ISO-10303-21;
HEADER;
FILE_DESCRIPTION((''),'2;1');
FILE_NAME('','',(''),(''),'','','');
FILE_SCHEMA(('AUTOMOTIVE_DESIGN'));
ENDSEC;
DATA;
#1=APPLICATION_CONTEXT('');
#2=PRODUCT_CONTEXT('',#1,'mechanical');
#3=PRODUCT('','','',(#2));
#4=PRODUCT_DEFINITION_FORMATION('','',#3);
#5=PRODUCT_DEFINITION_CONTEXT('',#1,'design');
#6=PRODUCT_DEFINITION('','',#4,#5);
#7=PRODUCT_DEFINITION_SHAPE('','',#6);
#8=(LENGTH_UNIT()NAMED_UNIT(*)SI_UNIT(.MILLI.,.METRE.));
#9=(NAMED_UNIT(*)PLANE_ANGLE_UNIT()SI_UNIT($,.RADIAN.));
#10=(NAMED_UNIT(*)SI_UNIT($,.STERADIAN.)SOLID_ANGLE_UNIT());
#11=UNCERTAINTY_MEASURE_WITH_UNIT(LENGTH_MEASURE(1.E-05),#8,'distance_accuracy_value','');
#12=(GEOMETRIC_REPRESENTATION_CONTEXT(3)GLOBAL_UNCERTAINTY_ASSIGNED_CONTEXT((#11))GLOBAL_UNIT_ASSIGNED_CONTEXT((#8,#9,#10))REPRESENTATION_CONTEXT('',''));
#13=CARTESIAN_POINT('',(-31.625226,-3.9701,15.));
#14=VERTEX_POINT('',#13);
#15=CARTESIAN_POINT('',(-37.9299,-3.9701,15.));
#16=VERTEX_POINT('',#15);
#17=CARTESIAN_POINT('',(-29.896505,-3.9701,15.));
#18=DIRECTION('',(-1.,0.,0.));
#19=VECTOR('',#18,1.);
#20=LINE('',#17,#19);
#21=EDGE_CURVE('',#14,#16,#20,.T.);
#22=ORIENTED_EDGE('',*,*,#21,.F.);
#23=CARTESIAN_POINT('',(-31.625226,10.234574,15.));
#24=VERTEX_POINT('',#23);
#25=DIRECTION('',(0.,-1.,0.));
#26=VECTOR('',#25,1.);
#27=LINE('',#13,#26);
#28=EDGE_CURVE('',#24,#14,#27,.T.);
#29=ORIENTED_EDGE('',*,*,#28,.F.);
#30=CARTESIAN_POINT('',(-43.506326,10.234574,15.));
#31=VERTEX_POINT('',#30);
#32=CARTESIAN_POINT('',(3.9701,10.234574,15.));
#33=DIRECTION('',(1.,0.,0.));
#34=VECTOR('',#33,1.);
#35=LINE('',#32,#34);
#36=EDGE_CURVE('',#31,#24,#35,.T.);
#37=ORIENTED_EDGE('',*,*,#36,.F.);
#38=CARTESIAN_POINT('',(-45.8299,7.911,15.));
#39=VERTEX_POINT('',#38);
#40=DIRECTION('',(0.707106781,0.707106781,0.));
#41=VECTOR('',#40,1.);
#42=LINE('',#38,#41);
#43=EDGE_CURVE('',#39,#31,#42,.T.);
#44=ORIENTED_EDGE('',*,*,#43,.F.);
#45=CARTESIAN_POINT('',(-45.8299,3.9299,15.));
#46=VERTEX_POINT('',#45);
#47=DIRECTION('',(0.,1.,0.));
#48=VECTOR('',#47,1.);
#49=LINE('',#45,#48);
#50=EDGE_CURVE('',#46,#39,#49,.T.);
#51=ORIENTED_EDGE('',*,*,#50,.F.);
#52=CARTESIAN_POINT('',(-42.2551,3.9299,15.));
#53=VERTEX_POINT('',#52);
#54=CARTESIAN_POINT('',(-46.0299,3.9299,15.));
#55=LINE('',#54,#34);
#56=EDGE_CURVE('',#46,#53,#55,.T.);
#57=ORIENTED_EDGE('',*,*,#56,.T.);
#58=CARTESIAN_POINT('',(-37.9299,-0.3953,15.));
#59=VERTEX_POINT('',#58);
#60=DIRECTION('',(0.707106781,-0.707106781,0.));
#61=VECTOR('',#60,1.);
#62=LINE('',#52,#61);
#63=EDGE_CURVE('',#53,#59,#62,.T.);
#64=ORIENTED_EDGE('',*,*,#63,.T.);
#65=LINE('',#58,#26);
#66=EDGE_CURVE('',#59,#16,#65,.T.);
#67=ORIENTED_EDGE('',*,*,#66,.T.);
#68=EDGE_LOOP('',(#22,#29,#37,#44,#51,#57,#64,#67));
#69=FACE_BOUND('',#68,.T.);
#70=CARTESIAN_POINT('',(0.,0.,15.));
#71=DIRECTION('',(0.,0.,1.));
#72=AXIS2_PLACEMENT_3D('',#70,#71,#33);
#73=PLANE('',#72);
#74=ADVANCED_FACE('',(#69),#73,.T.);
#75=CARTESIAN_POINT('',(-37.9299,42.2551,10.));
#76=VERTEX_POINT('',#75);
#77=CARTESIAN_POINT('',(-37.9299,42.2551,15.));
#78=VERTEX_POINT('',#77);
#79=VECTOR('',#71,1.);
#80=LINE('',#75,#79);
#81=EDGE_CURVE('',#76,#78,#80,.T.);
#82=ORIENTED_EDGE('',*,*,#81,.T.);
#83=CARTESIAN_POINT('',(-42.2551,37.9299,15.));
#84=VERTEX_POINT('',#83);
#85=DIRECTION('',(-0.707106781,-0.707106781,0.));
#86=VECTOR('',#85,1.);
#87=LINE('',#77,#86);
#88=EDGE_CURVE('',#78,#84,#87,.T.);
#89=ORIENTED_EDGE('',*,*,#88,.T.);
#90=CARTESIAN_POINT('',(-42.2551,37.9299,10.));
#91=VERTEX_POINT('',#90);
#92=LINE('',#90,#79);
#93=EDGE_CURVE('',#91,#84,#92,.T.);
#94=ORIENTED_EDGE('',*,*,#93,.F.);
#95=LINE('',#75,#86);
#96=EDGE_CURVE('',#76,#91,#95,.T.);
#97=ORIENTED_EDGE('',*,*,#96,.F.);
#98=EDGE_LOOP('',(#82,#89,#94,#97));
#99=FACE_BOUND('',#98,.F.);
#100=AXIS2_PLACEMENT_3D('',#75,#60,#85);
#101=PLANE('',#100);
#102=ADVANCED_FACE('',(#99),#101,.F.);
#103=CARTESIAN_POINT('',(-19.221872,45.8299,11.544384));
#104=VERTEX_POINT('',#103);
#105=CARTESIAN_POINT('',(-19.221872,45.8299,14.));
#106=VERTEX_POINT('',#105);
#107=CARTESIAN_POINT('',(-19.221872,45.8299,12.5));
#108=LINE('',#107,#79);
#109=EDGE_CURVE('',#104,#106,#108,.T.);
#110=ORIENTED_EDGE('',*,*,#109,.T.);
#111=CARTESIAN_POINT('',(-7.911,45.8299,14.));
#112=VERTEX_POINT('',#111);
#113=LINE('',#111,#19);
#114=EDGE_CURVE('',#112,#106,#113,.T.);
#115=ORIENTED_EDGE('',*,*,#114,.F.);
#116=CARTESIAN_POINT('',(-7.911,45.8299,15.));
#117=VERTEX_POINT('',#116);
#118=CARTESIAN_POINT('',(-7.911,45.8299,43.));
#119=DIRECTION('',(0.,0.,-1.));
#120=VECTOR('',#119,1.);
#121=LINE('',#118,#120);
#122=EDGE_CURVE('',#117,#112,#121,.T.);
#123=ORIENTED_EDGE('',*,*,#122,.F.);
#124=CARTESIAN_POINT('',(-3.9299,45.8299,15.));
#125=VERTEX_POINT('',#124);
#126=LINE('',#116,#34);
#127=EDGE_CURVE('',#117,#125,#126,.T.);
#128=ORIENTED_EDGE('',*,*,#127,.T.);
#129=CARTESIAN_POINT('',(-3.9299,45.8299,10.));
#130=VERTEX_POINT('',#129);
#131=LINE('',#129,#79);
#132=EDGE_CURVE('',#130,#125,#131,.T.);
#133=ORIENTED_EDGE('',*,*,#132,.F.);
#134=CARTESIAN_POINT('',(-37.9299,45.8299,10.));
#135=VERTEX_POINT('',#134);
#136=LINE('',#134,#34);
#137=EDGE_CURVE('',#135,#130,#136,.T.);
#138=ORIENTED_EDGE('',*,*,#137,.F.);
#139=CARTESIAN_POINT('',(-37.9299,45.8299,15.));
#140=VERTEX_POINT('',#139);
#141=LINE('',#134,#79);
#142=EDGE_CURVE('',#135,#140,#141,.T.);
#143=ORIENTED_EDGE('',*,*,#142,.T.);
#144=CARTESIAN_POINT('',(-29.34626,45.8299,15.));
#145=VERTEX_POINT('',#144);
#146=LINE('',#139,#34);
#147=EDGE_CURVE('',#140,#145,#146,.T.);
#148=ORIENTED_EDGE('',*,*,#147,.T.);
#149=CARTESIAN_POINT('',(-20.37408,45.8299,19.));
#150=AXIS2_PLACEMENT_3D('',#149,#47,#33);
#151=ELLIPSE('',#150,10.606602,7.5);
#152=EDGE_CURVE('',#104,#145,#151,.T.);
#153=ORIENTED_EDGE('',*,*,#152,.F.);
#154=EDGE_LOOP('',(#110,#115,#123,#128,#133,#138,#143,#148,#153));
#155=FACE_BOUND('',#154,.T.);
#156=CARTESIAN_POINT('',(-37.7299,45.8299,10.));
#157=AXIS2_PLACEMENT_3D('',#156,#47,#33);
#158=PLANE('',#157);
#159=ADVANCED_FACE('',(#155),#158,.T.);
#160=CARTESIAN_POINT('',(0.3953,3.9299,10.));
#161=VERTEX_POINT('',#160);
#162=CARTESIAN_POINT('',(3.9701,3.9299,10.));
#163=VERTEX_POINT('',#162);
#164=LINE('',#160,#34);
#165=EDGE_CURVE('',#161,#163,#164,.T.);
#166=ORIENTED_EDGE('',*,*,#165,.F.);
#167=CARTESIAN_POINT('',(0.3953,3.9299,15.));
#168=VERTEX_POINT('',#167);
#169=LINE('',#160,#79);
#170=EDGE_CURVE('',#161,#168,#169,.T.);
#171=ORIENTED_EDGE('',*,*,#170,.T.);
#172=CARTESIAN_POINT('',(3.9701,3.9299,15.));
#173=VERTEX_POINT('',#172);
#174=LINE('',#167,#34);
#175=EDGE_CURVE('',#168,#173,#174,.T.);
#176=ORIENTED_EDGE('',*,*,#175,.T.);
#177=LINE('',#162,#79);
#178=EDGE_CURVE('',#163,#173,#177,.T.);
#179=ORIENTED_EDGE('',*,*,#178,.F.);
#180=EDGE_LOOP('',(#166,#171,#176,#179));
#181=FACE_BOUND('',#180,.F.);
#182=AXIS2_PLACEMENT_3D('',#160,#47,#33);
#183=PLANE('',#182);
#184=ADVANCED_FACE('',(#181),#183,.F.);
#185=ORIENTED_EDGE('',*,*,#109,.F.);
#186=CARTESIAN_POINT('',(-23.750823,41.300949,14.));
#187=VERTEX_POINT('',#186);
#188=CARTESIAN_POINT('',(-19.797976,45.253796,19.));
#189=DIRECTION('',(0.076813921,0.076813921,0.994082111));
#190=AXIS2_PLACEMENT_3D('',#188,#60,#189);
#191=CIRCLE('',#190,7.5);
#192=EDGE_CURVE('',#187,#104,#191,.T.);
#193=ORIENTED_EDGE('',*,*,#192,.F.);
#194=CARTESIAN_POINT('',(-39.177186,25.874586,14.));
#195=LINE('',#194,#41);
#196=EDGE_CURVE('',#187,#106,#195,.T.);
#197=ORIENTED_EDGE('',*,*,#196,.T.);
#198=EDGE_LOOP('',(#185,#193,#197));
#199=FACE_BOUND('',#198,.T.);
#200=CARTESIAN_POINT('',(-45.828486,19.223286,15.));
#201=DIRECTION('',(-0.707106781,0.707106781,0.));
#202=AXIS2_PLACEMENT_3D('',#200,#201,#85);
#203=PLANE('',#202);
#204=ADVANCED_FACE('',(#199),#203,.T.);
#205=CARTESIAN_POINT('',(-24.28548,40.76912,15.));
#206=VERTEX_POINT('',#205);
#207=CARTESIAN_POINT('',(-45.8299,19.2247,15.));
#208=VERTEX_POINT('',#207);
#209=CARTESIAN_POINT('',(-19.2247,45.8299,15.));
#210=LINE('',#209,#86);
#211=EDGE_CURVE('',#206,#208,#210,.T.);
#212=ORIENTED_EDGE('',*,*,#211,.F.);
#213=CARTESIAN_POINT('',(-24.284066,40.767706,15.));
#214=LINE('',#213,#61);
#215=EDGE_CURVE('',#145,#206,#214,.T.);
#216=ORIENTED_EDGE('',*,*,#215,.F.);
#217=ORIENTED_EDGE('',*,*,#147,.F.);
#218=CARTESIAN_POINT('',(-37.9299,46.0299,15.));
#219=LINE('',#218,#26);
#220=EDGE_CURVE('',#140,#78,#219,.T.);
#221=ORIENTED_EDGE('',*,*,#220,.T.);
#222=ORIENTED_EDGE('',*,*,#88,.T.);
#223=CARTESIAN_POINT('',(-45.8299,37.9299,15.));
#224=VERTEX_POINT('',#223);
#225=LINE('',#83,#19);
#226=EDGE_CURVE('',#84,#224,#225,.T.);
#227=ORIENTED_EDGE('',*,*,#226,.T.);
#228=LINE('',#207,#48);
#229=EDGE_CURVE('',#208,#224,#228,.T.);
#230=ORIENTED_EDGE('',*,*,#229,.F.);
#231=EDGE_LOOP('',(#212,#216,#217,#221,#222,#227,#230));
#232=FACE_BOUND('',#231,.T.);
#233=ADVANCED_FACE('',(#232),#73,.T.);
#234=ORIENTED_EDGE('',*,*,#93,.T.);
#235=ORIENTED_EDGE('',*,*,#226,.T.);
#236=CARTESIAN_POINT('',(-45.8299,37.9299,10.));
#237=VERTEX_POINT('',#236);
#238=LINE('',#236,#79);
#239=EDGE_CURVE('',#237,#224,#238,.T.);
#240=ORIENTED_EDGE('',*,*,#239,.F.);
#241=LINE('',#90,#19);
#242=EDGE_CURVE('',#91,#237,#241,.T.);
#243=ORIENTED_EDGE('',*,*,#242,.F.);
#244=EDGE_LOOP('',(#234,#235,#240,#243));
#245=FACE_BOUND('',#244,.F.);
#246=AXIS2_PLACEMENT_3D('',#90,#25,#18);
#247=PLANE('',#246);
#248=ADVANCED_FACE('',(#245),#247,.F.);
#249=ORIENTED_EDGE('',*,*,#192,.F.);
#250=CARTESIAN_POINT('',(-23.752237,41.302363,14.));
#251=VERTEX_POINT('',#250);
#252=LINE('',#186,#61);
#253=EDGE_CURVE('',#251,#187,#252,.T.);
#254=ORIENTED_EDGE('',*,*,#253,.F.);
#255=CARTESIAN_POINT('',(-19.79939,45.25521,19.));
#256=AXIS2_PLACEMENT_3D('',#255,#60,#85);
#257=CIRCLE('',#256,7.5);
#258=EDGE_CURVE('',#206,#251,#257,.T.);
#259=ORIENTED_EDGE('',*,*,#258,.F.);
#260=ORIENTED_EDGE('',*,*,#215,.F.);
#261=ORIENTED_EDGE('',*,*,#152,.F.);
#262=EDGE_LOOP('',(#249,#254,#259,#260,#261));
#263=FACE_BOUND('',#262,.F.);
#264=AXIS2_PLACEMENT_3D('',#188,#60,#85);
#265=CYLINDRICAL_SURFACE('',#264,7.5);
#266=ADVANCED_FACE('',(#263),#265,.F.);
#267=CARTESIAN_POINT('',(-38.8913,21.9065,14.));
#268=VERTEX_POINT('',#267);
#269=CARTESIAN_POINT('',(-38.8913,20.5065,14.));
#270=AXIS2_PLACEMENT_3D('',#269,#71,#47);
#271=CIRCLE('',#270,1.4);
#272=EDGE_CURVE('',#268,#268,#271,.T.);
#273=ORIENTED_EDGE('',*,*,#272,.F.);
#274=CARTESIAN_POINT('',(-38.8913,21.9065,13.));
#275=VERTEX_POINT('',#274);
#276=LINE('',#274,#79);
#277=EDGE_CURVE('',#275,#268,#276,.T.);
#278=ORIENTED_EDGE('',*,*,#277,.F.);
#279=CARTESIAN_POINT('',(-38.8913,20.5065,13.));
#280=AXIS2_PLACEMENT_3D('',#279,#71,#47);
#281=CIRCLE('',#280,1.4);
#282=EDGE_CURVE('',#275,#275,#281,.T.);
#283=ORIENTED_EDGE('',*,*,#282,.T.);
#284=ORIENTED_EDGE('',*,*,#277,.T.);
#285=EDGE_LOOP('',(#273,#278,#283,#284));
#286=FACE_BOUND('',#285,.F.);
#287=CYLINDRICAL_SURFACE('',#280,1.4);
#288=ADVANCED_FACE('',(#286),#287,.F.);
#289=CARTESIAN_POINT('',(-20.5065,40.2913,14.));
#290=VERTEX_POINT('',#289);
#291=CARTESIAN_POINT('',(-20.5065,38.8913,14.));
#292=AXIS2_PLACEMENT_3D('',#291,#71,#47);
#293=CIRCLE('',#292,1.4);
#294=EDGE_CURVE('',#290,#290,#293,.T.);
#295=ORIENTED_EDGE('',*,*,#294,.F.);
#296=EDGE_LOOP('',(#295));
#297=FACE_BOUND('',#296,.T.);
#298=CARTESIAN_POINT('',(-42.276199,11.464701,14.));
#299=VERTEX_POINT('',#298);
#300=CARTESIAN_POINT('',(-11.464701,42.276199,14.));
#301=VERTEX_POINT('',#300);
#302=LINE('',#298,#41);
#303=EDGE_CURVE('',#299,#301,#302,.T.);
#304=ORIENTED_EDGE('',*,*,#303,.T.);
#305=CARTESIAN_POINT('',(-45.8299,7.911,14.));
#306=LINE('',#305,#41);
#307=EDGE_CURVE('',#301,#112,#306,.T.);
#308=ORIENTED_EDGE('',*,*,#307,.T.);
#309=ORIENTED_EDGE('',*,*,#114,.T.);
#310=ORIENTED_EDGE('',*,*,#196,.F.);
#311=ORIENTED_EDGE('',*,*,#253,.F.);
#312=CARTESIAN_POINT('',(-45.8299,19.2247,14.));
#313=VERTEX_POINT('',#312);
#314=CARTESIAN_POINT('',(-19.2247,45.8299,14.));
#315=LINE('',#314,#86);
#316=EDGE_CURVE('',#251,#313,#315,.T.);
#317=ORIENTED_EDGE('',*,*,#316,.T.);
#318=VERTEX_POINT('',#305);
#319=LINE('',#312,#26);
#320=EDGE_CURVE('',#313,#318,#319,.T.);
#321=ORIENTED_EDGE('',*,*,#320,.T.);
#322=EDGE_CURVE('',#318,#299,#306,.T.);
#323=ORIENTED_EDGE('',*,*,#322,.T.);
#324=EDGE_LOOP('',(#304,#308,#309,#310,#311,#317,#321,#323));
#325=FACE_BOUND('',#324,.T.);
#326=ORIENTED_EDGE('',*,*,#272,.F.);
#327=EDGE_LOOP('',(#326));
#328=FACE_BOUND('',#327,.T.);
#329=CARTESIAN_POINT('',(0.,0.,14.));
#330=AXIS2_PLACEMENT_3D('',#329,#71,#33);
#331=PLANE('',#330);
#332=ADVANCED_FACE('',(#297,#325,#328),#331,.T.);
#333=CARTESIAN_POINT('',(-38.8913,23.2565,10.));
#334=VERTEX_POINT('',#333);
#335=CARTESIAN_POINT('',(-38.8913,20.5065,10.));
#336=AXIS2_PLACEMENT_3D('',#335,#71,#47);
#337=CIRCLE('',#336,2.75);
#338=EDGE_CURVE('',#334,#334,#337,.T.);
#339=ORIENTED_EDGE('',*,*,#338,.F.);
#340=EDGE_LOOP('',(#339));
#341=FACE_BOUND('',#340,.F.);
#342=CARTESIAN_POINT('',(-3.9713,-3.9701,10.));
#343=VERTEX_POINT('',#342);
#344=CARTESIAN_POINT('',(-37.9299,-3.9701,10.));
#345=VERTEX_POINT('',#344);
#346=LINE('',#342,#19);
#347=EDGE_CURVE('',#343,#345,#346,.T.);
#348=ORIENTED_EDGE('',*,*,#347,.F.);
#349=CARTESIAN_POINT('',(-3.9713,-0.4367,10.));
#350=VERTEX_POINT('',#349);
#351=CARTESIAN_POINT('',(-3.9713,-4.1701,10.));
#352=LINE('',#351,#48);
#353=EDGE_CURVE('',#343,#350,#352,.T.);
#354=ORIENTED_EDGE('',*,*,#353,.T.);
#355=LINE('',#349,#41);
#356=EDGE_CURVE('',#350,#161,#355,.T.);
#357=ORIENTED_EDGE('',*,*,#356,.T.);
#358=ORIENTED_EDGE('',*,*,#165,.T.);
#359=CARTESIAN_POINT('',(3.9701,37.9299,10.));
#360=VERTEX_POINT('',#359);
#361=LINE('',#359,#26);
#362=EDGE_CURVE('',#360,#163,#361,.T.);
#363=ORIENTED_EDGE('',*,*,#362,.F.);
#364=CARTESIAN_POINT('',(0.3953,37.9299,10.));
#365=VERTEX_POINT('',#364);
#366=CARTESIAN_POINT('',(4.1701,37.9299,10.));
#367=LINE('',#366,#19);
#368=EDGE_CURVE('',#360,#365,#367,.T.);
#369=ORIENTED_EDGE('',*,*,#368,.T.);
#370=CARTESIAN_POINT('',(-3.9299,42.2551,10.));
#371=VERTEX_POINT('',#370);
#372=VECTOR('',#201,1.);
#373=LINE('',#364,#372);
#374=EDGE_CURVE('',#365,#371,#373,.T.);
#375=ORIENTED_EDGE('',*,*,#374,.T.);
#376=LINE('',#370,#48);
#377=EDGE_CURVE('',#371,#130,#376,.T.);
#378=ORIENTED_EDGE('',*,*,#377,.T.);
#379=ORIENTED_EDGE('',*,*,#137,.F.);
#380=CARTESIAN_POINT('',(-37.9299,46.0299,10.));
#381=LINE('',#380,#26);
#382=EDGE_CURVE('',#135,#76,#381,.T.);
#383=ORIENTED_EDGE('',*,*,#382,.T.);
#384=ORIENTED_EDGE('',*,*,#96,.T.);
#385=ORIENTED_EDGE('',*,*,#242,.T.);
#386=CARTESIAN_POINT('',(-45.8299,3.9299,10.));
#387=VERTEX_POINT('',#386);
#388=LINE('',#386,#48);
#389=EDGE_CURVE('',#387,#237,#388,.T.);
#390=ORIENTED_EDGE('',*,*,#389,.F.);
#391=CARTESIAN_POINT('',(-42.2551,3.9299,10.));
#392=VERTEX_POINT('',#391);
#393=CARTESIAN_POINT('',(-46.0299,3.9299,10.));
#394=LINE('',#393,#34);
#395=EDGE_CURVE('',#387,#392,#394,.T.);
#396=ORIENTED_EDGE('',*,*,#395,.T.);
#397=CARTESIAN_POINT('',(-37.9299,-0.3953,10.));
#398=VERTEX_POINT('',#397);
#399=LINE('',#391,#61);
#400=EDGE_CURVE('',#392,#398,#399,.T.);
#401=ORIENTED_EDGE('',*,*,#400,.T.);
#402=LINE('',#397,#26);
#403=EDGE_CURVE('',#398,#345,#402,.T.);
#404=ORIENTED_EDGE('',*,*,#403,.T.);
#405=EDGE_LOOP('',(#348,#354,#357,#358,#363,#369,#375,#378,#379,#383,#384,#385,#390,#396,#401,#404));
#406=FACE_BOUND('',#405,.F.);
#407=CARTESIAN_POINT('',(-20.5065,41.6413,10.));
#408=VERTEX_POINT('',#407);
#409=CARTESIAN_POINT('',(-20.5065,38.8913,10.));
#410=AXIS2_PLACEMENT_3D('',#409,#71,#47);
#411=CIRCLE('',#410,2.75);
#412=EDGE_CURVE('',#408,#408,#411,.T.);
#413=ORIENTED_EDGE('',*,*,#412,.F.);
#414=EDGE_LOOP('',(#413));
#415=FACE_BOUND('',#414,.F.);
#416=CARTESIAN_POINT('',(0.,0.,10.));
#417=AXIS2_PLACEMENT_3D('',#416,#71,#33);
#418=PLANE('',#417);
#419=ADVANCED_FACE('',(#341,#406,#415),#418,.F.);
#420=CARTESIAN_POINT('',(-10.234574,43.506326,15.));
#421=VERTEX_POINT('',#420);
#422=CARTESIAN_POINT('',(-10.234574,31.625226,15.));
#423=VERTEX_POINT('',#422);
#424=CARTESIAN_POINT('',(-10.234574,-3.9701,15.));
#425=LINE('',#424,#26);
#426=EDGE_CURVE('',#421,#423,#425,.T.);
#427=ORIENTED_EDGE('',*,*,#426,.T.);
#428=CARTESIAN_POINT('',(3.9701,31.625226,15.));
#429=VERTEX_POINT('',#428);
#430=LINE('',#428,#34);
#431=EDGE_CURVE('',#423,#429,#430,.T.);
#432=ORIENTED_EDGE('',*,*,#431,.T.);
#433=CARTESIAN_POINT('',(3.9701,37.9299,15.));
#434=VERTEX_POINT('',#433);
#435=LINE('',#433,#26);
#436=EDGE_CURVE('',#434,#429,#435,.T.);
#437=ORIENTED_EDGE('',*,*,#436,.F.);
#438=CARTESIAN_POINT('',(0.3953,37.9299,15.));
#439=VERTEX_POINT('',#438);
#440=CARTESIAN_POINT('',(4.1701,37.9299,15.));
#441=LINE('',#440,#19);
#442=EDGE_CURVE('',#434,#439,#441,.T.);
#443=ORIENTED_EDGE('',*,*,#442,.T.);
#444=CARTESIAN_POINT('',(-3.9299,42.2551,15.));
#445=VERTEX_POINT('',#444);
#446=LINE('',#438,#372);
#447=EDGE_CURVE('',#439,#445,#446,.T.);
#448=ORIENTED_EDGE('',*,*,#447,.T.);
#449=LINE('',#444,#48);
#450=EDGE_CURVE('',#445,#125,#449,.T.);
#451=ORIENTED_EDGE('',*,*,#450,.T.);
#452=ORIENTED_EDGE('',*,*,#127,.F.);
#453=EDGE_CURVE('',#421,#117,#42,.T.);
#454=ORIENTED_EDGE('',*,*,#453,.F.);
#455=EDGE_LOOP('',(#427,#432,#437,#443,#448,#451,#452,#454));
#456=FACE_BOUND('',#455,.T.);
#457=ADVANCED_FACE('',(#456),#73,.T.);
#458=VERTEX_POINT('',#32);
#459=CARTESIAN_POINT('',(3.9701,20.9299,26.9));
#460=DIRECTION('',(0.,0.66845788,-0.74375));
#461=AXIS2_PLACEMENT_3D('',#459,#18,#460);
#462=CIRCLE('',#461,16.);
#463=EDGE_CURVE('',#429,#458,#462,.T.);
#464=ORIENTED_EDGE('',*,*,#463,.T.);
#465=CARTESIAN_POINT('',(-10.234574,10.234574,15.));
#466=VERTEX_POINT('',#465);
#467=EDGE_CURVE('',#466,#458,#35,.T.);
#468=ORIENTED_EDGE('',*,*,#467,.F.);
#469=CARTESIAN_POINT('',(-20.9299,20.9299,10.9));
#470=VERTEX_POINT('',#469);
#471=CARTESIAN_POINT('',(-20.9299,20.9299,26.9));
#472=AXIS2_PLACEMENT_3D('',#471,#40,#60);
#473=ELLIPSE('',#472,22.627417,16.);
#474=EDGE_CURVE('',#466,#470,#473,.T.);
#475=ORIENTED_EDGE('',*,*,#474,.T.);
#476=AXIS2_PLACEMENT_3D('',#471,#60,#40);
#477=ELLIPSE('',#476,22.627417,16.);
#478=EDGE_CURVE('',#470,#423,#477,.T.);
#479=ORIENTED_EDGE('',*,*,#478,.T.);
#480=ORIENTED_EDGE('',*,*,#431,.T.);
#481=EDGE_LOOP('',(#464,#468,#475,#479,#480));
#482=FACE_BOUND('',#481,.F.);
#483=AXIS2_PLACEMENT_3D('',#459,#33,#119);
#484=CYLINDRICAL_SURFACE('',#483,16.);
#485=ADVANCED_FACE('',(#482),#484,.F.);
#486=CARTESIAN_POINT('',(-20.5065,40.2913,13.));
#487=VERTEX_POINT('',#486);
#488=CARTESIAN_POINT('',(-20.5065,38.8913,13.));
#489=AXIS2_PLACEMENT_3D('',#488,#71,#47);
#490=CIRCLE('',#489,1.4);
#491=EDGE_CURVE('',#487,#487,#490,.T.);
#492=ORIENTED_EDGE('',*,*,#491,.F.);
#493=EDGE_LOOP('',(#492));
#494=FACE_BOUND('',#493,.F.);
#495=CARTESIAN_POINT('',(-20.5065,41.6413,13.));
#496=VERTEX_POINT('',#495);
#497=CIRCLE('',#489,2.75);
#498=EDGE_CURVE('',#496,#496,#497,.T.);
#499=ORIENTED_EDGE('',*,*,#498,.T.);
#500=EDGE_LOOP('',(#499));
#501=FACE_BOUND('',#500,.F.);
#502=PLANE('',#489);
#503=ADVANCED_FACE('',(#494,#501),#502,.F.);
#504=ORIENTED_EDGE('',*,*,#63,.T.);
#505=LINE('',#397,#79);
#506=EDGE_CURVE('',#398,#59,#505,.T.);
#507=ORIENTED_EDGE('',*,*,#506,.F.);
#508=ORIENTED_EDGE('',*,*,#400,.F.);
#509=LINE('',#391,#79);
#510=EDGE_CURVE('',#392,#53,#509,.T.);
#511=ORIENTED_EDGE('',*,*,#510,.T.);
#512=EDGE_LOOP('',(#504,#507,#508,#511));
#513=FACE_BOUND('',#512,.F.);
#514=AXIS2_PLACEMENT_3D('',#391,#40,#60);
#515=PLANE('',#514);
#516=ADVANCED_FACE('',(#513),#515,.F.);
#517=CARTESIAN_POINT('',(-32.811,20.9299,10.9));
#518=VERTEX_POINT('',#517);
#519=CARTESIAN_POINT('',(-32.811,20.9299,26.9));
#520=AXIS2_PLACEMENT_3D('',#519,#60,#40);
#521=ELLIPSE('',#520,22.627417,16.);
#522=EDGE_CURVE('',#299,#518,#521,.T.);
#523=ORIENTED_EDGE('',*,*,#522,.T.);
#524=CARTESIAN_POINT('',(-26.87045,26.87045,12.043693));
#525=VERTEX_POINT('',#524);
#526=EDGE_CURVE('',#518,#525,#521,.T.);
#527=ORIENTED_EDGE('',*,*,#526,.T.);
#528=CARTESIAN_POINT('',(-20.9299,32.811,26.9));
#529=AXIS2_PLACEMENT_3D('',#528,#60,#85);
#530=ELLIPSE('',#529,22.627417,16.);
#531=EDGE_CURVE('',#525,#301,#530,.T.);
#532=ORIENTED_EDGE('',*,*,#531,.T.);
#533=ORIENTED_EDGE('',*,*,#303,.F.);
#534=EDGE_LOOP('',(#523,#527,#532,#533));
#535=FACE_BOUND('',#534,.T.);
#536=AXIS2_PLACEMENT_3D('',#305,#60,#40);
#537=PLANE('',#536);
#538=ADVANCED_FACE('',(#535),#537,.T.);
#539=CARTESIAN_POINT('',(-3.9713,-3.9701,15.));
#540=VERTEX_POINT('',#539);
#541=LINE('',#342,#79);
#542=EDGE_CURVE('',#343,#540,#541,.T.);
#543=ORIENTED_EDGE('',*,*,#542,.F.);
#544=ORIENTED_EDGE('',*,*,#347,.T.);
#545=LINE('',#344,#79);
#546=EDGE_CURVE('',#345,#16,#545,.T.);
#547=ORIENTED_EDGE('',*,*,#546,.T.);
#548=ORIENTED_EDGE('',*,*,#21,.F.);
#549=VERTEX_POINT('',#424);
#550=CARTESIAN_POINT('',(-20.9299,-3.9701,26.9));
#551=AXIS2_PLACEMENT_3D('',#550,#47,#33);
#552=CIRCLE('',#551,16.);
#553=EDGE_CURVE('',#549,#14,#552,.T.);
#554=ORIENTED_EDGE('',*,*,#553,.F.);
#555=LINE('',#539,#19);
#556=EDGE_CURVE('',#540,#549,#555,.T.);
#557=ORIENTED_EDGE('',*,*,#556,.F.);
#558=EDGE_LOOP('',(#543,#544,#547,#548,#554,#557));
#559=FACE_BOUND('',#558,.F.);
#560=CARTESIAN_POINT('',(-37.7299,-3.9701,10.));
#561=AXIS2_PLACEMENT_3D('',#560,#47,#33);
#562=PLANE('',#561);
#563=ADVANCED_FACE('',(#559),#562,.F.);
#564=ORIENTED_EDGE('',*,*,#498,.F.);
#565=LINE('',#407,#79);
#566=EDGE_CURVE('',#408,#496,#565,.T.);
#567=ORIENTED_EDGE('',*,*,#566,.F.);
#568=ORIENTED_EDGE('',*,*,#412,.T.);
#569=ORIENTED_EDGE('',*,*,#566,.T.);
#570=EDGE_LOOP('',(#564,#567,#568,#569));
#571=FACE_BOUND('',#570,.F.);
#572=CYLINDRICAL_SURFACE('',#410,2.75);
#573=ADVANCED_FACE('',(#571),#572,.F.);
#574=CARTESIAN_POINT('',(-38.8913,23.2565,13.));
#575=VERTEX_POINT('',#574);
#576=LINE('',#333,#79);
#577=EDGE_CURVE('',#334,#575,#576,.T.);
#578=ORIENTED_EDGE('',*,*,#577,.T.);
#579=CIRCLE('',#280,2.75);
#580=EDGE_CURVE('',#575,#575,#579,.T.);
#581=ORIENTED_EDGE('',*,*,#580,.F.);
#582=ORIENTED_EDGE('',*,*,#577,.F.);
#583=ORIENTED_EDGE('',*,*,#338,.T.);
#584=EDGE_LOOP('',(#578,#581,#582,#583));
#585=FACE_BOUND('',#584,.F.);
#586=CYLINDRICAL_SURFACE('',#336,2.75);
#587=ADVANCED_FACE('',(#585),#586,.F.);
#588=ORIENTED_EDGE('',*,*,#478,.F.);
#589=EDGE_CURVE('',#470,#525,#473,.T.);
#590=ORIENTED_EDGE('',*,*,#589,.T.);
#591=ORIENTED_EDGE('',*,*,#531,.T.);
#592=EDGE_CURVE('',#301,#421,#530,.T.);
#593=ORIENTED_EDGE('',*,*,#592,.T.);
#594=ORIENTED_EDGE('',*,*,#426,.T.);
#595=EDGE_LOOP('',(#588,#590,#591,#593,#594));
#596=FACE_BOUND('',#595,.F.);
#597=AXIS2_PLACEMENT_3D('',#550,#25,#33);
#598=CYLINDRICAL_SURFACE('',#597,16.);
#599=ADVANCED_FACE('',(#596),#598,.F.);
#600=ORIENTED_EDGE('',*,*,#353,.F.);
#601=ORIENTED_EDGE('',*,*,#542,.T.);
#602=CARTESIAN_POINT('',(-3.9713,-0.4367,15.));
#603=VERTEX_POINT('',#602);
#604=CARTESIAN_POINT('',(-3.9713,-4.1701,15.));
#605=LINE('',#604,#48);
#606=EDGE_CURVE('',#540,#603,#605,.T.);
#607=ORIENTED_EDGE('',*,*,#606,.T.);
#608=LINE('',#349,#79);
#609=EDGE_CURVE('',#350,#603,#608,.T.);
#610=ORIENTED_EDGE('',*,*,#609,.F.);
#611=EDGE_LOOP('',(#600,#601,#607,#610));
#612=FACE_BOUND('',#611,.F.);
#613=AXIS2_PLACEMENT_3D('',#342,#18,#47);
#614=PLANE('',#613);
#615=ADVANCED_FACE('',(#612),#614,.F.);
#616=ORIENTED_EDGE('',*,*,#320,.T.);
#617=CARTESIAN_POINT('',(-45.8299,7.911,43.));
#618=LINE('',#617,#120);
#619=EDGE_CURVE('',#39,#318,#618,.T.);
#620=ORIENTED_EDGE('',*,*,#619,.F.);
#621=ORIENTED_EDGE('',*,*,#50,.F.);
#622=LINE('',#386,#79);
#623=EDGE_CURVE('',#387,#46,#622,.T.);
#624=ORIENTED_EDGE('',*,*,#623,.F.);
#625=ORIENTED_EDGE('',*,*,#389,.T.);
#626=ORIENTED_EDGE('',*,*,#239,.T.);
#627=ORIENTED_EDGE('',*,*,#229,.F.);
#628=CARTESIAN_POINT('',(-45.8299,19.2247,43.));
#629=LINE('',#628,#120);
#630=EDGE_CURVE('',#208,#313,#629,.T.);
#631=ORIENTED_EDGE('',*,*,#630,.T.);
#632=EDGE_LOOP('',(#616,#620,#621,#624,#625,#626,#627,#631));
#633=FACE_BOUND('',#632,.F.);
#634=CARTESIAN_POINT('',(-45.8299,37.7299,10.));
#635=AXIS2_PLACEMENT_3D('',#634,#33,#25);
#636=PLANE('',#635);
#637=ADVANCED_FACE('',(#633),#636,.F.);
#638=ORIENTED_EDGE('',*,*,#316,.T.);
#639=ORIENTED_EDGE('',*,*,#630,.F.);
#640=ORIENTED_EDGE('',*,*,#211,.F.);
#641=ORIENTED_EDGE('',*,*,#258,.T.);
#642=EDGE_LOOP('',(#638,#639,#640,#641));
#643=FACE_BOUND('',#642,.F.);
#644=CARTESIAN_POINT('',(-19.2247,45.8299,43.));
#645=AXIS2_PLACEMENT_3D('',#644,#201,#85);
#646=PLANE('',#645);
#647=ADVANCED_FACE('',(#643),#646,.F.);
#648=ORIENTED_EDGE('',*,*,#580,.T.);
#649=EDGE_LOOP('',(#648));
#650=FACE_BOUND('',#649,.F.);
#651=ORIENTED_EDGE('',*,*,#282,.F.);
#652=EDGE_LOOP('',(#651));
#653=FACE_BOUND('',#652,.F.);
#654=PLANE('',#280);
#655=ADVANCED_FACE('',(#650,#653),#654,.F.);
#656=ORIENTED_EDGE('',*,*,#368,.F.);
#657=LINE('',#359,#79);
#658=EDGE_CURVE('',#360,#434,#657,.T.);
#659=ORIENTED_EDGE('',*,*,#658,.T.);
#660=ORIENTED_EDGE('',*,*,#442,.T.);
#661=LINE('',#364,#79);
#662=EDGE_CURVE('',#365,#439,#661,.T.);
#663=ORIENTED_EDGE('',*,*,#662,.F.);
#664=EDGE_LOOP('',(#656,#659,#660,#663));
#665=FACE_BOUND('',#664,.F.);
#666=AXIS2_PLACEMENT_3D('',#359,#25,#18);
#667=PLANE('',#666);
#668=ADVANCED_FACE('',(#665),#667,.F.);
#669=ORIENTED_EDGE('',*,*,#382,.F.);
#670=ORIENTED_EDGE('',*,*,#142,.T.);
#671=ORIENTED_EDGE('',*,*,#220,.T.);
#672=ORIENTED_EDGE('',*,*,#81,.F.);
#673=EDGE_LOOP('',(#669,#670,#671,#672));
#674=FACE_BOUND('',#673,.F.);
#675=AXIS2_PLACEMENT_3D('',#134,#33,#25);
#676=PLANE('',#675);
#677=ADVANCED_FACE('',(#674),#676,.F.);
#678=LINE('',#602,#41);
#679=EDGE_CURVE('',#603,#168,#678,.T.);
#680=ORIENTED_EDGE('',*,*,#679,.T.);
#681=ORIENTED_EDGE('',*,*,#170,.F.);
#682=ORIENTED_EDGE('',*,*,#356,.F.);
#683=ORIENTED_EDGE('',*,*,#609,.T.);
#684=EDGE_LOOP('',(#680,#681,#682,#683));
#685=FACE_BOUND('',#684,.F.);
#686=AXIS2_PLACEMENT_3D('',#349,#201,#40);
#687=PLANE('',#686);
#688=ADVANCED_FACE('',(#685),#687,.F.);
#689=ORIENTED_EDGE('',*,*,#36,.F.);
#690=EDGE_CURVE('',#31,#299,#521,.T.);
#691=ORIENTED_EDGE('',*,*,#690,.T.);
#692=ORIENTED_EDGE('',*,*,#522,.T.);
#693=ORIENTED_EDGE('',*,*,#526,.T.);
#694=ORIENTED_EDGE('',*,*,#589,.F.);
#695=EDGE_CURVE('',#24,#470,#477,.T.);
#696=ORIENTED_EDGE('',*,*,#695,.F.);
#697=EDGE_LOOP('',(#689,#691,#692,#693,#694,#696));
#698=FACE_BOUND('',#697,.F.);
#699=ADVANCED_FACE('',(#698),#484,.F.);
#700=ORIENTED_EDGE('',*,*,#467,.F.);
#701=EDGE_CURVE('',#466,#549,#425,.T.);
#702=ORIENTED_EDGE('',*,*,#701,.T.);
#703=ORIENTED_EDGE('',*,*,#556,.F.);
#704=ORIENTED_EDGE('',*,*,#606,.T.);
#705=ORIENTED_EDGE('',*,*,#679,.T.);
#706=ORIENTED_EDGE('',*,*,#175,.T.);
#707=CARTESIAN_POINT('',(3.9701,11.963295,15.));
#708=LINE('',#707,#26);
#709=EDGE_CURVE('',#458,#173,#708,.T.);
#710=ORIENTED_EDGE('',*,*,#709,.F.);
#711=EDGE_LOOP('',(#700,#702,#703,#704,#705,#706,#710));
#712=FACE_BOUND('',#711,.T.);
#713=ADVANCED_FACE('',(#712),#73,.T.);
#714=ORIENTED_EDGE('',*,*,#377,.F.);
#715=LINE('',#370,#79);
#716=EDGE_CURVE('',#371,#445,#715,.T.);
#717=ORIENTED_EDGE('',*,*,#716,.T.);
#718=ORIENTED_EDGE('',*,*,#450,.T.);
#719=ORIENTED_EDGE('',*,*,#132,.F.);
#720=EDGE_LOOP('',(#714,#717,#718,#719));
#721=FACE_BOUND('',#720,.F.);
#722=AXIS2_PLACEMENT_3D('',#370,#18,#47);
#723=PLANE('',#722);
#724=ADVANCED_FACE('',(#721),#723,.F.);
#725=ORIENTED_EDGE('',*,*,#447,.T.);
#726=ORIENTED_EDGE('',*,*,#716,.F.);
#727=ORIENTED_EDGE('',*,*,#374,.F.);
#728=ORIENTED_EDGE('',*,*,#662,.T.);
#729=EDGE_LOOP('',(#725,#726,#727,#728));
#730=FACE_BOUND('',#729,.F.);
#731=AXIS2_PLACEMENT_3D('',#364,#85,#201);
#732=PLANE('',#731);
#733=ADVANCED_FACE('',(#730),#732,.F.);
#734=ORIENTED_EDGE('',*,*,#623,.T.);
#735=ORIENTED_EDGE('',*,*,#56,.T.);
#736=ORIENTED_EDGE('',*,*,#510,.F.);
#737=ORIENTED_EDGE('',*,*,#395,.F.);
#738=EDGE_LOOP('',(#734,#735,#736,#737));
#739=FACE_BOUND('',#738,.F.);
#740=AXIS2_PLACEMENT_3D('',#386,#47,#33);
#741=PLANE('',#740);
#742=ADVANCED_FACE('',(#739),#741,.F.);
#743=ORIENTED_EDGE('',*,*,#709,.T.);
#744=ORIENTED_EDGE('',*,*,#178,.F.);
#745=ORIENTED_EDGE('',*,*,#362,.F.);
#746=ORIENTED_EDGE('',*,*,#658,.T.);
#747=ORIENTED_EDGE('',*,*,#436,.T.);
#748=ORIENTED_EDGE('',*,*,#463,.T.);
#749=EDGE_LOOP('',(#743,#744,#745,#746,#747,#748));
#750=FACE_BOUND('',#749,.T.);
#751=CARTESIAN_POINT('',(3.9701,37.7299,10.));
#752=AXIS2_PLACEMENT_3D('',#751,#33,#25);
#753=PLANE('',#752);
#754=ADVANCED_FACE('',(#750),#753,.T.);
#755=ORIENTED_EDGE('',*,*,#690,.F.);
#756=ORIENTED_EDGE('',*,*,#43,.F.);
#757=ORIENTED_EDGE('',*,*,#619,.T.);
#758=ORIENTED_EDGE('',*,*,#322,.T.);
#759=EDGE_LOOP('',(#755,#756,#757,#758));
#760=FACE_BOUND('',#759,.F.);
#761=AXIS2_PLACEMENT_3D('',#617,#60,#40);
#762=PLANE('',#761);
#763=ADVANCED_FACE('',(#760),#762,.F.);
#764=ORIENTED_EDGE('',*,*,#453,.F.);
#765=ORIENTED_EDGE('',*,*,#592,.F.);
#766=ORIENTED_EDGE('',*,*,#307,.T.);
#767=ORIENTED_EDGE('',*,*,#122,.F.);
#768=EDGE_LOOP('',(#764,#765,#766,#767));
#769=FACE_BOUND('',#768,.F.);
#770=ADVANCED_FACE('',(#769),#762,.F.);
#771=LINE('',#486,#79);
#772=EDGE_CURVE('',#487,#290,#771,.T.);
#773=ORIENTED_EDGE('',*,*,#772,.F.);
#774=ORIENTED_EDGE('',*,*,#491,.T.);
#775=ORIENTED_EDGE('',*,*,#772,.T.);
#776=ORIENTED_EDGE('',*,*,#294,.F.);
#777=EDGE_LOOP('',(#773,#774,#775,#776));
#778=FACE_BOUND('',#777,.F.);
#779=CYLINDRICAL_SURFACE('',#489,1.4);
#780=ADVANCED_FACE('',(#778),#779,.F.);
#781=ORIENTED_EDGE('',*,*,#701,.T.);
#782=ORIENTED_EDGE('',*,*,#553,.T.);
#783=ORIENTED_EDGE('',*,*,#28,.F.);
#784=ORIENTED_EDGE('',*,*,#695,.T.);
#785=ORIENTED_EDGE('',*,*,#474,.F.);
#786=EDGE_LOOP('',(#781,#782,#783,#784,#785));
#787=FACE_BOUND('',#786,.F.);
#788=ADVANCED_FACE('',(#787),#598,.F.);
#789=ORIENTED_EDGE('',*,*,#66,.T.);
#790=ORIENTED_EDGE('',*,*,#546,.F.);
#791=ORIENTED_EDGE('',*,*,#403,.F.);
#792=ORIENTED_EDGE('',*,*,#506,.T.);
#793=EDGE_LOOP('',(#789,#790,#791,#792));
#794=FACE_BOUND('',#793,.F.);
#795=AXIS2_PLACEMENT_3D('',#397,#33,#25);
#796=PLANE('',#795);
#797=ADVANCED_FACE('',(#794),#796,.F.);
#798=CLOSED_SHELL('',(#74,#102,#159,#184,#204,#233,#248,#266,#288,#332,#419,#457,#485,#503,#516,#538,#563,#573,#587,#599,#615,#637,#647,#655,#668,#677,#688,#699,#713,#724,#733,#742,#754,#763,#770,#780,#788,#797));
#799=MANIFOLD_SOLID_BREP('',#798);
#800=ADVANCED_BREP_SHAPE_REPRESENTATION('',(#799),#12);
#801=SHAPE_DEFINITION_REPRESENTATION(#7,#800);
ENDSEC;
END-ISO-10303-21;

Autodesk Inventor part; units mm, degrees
ref_plane "Work Plane1" through (0, 0, 10) normal (0, 0, 1) x (1, 0, 0)
sketch "Sketch1" plane through (0, 0, 10) normal (0, 0, 1) x (1, 0, 0)
  line L0 (-4.0299, -0.3538) -> (-2.2322, 1.4439) construction
  arc A0 (-1.4439, 2.2322) -> (-2.2322, 1.4439) centre (-0.9299, 0.9299) ccw construction
  line L1 (-1.4439, 2.2322) -> (0.3538, 4.0299) construction
  line L2 (-37.8299, 42.8299) -> (-37.8299, 37.8299) construction
  line L3 (-37.8299, 37.8299) -> (-42.9208, 37.8299) construction
  line L4 (-37.8299, 42.2137) -> (-37.8299, 45.8299) construction
  line L5 (-37.8299, 45.8299) -> (-4.0299, 45.8299) construction
  line L6 (-4.0299, 45.8299) -> (-4.0299, 42.2137) construction
  line L7 (-4.0299, 4.0299) -> (0.3538, 4.0299) projected
  circle A1 centre (-20.9299, 20.9299) radius 17.5 projected
  line L8 (-20.9299, 58.9723) -> (17.1124, 20.9299) construction
  line L9 (17.1124, 20.9299) -> (-20.9299, -17.1124) construction
  line L10 (-20.9299, -17.1124) -> (-58.9723, 20.9299) construction
  line L11 (-58.9723, 20.9299) -> (-20.9299, 58.9723) construction
  line L12 (-20.9299, 58.9723) -> (-20.9299, -17.1124) construction
  line L13 (17.1124, 20.9299) -> (-58.9723, 20.9299) construction
  line L14 (-20.9299, 58.9723) -> (32.8701, 58.9723) construction
  line L15 (-43.4299, 43.4299) -> (1.5701, 43.4299) construction
  line L16 (1.5701, 43.4299) -> (1.5701, -1.5701) construction
  line L17 (1.5701, -1.5701) -> (-43.4299, -1.5701) construction
  line L18 (-43.4299, -1.5701) -> (-43.4299, 43.4299) construction
  line L19 (-43.4299, 43.4299) -> (1.5701, -1.5701) construction
  line L20 (1.5701, 43.4299) -> (-43.4299, -1.5701) construction
  line L21 (-43.4299, 5.3876) -> (-43.4299, 36.4723)
  line L22 (-43.4299, 36.4723) -> (-36.4723, 43.4299)
  line L23 (-36.4723, 43.4299) -> (-5.3876, 43.4299)
  line L24 (-5.3876, 43.4299) -> (1.5701, 36.4723)
  line L25 (1.5701, 36.4723) -> (1.5701, 5.3876)
  line L26 (1.5701, 5.3876) -> (-5.3876, -1.5701)
  line L27 (-5.3876, -1.5701) -> (-36.4723, -1.5701)
  line L28 (-36.4723, -1.5701) -> (-43.4299, 5.3876)
  line L29 (-4.0299, 42.2137) -> (-37.8299, 42.2137) projected
  line L30 (-4.0299, -0.3538) -> (-4.0299, 4.0299) projected
  circle A2 centre (-20.9299, 20.9299) radius 1.4
  line L31 (-10.9299, 10.9299) -> (-30.9299, 10.9299) construction
  line L32 (-30.9299, 10.9299) -> (-30.9299, 30.9299) construction
  line L33 (-30.9299, 30.9299) -> (-10.9299, 30.9299) construction
  line L34 (-10.9299, 30.9299) -> (-10.9299, 10.9299) construction
  line L35 (-10.9299, 10.9299) -> (-30.9299, 30.9299) construction
  line L36 (-30.9299, 10.9299) -> (-10.9299, 30.9299) construction
  circle A3 centre (-30.9299, 30.9299) radius 1.4
  circle A4 centre (-30.9299, 10.9299) radius 1.4
  circle A5 centre (-10.9299, 10.9299) radius 1.4
  line L37 (-45.8299, 37.8299) -> (-42.0723, 37.8299) construction
  line L38 (-42.1723, 37.7299) -> (-45.8299, 37.7299)
  line L39 (-45.8299, 37.7299) -> (-45.8299, 4.1299)
  line L40 (-45.8299, 4.1299) -> (-42.1723, 4.1299)
  line L41 (-42.1723, 4.1299) -> (-42.1723, 37.7299)
  line L42 (-45.8299, 4.0299) -> (-42.0723, 4.0299) construction
  line L43 (-45.8299, 37.8299) -> (-42.0723, 37.8299) projected
  line L44 (-37.7299, 45.8299) -> (-4.1299, 45.8299)
  line L45 (-4.1299, 45.8299) -> (-4.1299, 42.1723)
  line L46 (-4.1299, 42.1723) -> (-37.7299, 42.1723)
  line L47 (-37.7299, 42.1723) -> (-37.7299, 45.8299)
  line L48 (0.4701, 37.8299) -> (0.4701, 4.0299) construction
  line L49 (0.4701, 4.0299) -> (3.9701, 4.0299) construction
  line L50 (3.9701, 37.8299) -> (3.9701, 4.0299) construction
  line L51 (0.4701, 37.8299) -> (3.9701, 37.8299) construction
  line L52 (-45.8299, -3.9701) -> (-4.0299, -3.9701) construction
  line L53 (0.3124, 37.7299) -> (3.9701, 37.7299)
  line L54 (3.9701, 37.7299) -> (3.9701, 4.1299)
  line L55 (3.9701, 4.1299) -> (0.3124, 4.1299)
  line L56 (0.3124, 4.1299) -> (0.3124, 37.7299)
  line L57 (-4.1713, -0.3538) -> (-37.7299, -0.3538)
  line L58 (-37.7299, -0.3538) -> (-37.7299, -3.9701)
  line L59 (-37.7299, -3.9701) -> (-4.1713, -3.9701)
  line L60 (-4.1713, -3.9701) -> (-4.1713, -0.3538)
  point P0 (-37.8299, 4.0299)
  dimension "d18" = 53.8
  dimension "d19" = 45
  dimension "d20" = 53.8
  dimension "d21" = 45
  dimension "d22" = 45
  dimension "d30" = 20
  dimension "d31" = 20
  dimension "d32" = 2.8
  dimension "d33" = 2.8
  dimension "d34" = 2.8
  dimension "d35" = 2.8
  dimension "d36" = 0.1
  dimension "d37" = 0.1
  dimension "d38" = 0.1
  dimension "d39" = 0.1
extrude "Extrusion1" add sketch "Sketch1" along normal blind 5 contours L30 L26 L57 L28 L41 L22 L46 L24 L56 L7 | L7 L26 L30 | L56 L24 L25 L26 | L26 L25 L24 L53 L54 L55 | L60 L59 L58 L57 L28 L27 L26 | L26 L27 L28 L57 | L46 L22 L29 L24 | L24 L29 L45 | L40 L39 L38 L22 L21 L28 | L28 L21 L22 L41 | L29 L22 L23 L24 | L24 L23 L22 L29 L47 L44 L45 | L47 L29 L22 | A1 | A2 | A3 | A4 | A5
sketch "Sketch4" plane through (0, 0, 15) normal (0, 0, 1) x (1, 0, 0)
  line L0 (-37.7299, 42.1723) -> (-42.1723, 37.7299) projected
  line L1 (-42.1723, 37.7299) -> (-45.8299, 37.7299) projected
  line L2 (-45.8299, 37.7299) -> (-45.8299, 4.1299) projected
  line L3 (-45.8299, 4.1299) -> (-42.1723, 4.1299) projected
  line L4 (-42.1723, 4.1299) -> (-37.6885, -0.3538) projected
  line L5 (-37.6885, -0.3538) -> (-37.7299, -0.3538) projected
  line L6 (-37.7299, -0.3538) -> (-37.7299, -3.9701) projected
  line L7 (-37.7299, -3.9701) -> (-4.1713, -3.9701) projected
  line L8 (-4.1713, -3.9701) -> (-4.1713, -0.3538) projected
  line L9 (-4.1713, -0.3538) -> (0.3124, 4.1299) projected
  line L10 (0.3124, 4.1299) -> (3.9701, 4.1299) projected
  line L11 (3.9701, 4.1299) -> (3.9701, 37.7299) projected
  line L12 (3.9701, 37.7299) -> (0.3124, 37.7299) projected
  line L13 (0.3124, 37.7299) -> (-4.1299, 42.1723) projected
  line L14 (-4.1299, 42.1723) -> (-4.1299, 45.8299) projected
  line L15 (-4.1299, 45.8299) -> (-37.7299, 45.8299) projected
  line L16 (-37.7299, 45.8299) -> (-37.7299, 42.1723) projected
  line L17 (-45.8299, 37.7299) -> (-45.8299, 4.1299) projected
  line L18 (-45.8299, 7.911) -> (-7.911, 45.8299)
  line L19 (-45.8299, 7.911) -> (7.7955, 7.911) construction
  line L20 (-7.911, 45.8299) -> (-19.2247, 45.8299)
  line L21 (-4.1299, 45.8299) -> (-37.7299, 45.8299) projected
  line L22 (-19.2247, 45.8299) -> (-45.8299, 19.2247)
  line L23 (-45.8299, 7.911) -> (-45.8299, 19.2247)
  circle A0 centre (-40.9299, 0.9299) radius 1.1933 projected
  circle A1 centre (-0.9299, 40.9299) radius 1.4 projected
  line L24 (-40.9299, 0.9299) -> (-0.9299, 40.9299)
  line L25 (0.3124, 37.7299) -> (-4.1299, 42.1723) projected
  point P0 (0, 0)
  dimension "d40" = 45
  dimension "d41" = 8
extrude "Extrusion4" add sketch "Sketch4" along normal blind 28 contours L15 L18 L2 L22
sketch "Sketch5" plane through (-45.8299, 19.2247, 15) normal (-0.7071068, 0.7071068, 0) x (-0.7071068, -0.7071068, 0)
  line L0 (0, 0) -> (-37.6254, 0) projected
  line L1 (0, 0) -> (0, 28) projected
  line L2 (-37.6254, 28) -> (0, 28) projected
  line L3 (-37.6254, 0) -> (-37.6254, 28) projected
  circle A0 centre (-18.8127, 9.1873) radius 18.8127
  line L4 (-6.8127, 24) -> (-36.8127, 24) construction
  line L5 (-36.8127, 24) -> (-36.8127, 4) construction
  line L6 (-36.8127, 4) -> (-6.8127, 4) construction
  line L7 (-6.8127, 4) -> (-6.8127, 24) construction
  line L8 (-6.8127, 24) -> (-36.8127, 4) construction
  line L9 (-36.8127, 24) -> (-6.8127, 4) construction
  point P0 (-18.8127, -15)
  point P1 (-21.8127, 14)
  dimension "d44" = 30
  dimension "d45" = 20
hole "Hole1" at (-19.7994, 45.2552, 39) at (-19.7994, 45.2552, 19) at (-41.0126, 24.042, 39) at (-30.406, 34.6486, 29) direction (0.7071068, -0.7071068, 0) diameter 2.8 depth 12
sketch "Sketch6" plane through (-37.7299, -3.9701, 10) normal (0, -1, 0) x (1, 0, 0)
  circle A0 centre (-3.2, 36.9) radius 1.45 projected
  circle A1 centre (36.8, 36.9) radius 1.45 projected
  line L0 (-6.1, 0) -> (-6.1, 39.8) projected
  line L1 (-0.1, 0) -> (-6.1, 0) projected
  line L2 (-0.1, 33.8) -> (-0.1, 0) projected
  line L3 (33.7, 33.8) -> (-0.1, 33.8) projected
  line L4 (33.7, 33.8) -> (33.7, 0) projected
  line L5 (39.7, 0) -> (33.7, 0) projected
  line L6 (39.7, 39.8) -> (39.7, 0) projected
  line L7 (-6.1, 39.8) -> (39.7, 39.8) projected
  circle A2 centre (16.8, 16.9) radius 16.9
  circle A3 centre (16.8, 16.9) radius 14.9
  line L8 (-0.1, 16.9) -> (-0.1, 0)
  line L9 (0, 0) -> (33.5586, 0) projected
  line L10 (0.0414, 0) -> (-4.4423, 0) projected
  line L11 (33.5586, 0) -> (0.0414, 0)
  line L12 (33.7, 16.9) -> (33.5586, 0)
  point P0 (37.7299, -10)
  dimension "d53" = 2
extrude "Extrusion5" cut sketch "Sketch6" against normal up to surface contours A3 surface through (-45.8299, 7.911, 15) normal (0.7071068, -0.7071068, 0)
ref_plane "Work Plane3" through (3.9701, 45.8299, 26) normal (1, 0, 0) x (0, -1, 0)
sketch "Sketch7" plane through (3.9701, 45.8299, 26) normal (1, 0, 0) x (0, -1, 0)
  line L0 (41.8, -17.8) -> (41.8, 16) projected
  line L1 (8, -17.8) -> (41.8, -17.8) projected
  line L2 (8, -17.8) -> (8, 16) projected
  circle A0 centre (24.9, -0.9) radius 16.9
  circle A1 centre (24.9, -0.9) radius 14.9
  circle A2 centre (24.9, -0.9) radius 16
  point P0 (45.8299, 26)
  dimension "d56" = 2
  dimension "d81" = 32
ref_plane "Work Plane4" through (-34.8055, 8.3289, 16.6138) normal (0.7071068, -0.7071068, 0) x (0.7071068, 0.7071068, 0)
extrude "Extrusion6" cut sketch "Sketch7" against normal up to surface contours A1 surface through (-45.8299, 7.911, 15) normal (0.7071068, -0.7071068, 0)
sketch "Sketch8" plane through (-45.8299, 19.2247, 15) normal (-0.7071068, 0.7071068, 0) x (-0.7071068, -0.7071068, 0)
  arc A0 (-37.6254, 2.8601) -> (-37.6254, 5.1399) centre (-36.8127, 4) ccw projected
  circle A1 centre (-36.8127, 4) radius 7.5
  point P0 (-18.8127, -15)
  dimension "d59" = 15
extrude "Extrusion7" cut sketch "Sketch8" along normal blind 10
sketch "Sketch9" plane through (0, 0, 10) normal (0, 0, -1) x (-1, 0, 0)
  line L0 (45.8299, 19.2247) -> (24.2855, 40.7692) projected
  line L1 (41.7776, 11.9633) -> (26.8705, 26.8705) projected
  line L2 (26.8705, 26.8705) -> (11.9633, 41.7776) projected
  line L3 (19.2247, 45.8299) -> (24.2855, 40.7692) projected
  line L4 (7.911, 45.8299) -> (11.9633, 41.7776) projected
  line L5 (41.7776, 11.9633) -> (45.8299, 7.911) projected
  line L6 (15.1325, 38.6084) -> (20.7894, 44.2653) projected
  line L7 (13.1526, 40.5883) -> (18.3942, 45.8299) projected
  line L8 (34.3658, 19.3751) -> (40.0227, 25.032) projected
  line L9 (36.3457, 17.3952) -> (42.0026, 23.0521) projected
  circle A0 centre (20.5065, 38.8913) radius 1.4
  line L10 (25.7391, 28.0018) -> (31.396, 33.6587) projected
  line L11 (31.396, 33.6587) -> (25.7391, 28.0018)
  line L12 (26.8705, 26.8705) -> (32.5273, 32.5273)
  circle A1 centre (38.8913, 20.5065) radius 1.4
  point P0 (0, 0)
  point P1 (34.7528, 24.7491)
  dimension "d62" = 2.8
hole "Hole2" at (-20.5065, 38.8913, 10) at (-38.8913, 20.5065, 10) direction (0, 0, 1) diameter 2.8 depth 12 counterbore diameter 5.5 counterbore depth 3
sketch "Sketch13" plane through (0, 0, 43) normal (0, 0, 1) x (1, 0, 0)
  line L0 (-7.911, 45.8299) -> (-19.2247, 45.8299) projected
  line L1 (-19.2247, 45.8299) -> (-45.8299, 19.2247) projected
  line L2 (-45.8299, 19.2247) -> (-45.8299, 7.911) projected
  line L3 (-45.8299, 7.911) -> (-7.911, 45.8299) projected
  point P0 (0, 0)
extrude "Extrusion10" cut sketch "Sketch13" against normal blind 29
sketch "Sketch14" plane through (0, 0, 10) normal (0, 0, -1) x (-1, 0, 0)
  circle A0 centre (20.5065, 38.8913) radius 2.75 construction
  circle A1 centre (38.8913, 20.5065) radius 2.75 construction
  line L0 (42.1723, 37.7299) -> (37.7299, 42.1723) projected
  line L1 (37.7299, 45.8299) -> (37.7299, 42.1723) projected
  line L2 (4.1299, 45.8299) -> (37.7299, 45.8299) construction
  line L3 (4.1299, 42.1723) -> (4.1299, 45.8299) projected
  line L4 (4.1299, 42.1723) -> (-0.3124, 37.7299) projected
  line L5 (-3.9701, 37.7299) -> (-0.3124, 37.7299) projected
  line L6 (-3.9701, 4.1299) -> (-3.9701, 37.7299) construction
  line L7 (-0.3124, 4.1299) -> (-3.9701, 4.1299) projected
  line L8 (-0.3124, 4.1299) -> (4.1713, -0.3538) projected
  line L9 (4.1713, -3.9701) -> (4.1713, -0.3538) projected
  line L10 (37.7299, -3.9701) -> (4.1713, -3.9701) construction
  line L11 (37.7299, -0.3538) -> (37.7299, -3.9701) projected
  line L12 (37.6885, -0.3538) -> (37.7299, -0.3538) projected
  line L13 (37.6885, -0.3538) -> (42.1723, 4.1299) projected
  line L14 (45.8299, 4.1299) -> (42.1723, 4.1299) projected
  line L15 (45.8299, 37.7299) -> (45.8299, 4.1299) construction
  line L16 (42.1723, 37.7299) -> (45.8299, 37.7299) projected
  line L17 (3.9713, -4.1701) -> (3.9713, -0.4367)
  line L18 (3.9713, -0.4367) -> (-0.3953, 3.9299)
  line L19 (-0.3953, 3.9299) -> (-4.1701, 3.9299)
  line L20 (-4.1701, 3.9299) -> (-4.1701, 37.9299) construction
  line L21 (-4.1701, 37.9299) -> (-0.3953, 37.9299)
  line L22 (-0.3953, 37.9299) -> (3.9299, 42.2551)
  line L23 (3.9299, 42.2551) -> (3.9299, 46.0299)
  line L24 (3.9299, 46.0299) -> (37.9299, 46.0299) construction
  line L25 (37.9299, 46.0299) -> (37.9299, 42.2551)
  line L26 (37.9299, 42.2551) -> (42.2551, 37.9299)
  line L27 (42.2551, 37.9299) -> (46.0299, 37.9299)
  line L28 (46.0299, 37.9299) -> (46.0299, 3.9299) construction
  line L29 (46.0299, 3.9299) -> (42.2551, 3.9299)
  line L30 (42.2551, 3.9299) -> (37.9299, -0.3953)
  line L31 (37.9299, -0.3953) -> (37.9299, -4.1701)
  line L32 (37.9299, -4.1701) -> (3.9713, -4.1701) construction
  line L33 (45.8299, 4.1299) -> (42.1723, 4.1299) projected
  line L34 (45.8299, 4.1299) -> (45.8299, 3.9299)
  line L35 (37.7299, -0.3538) -> (37.7299, -3.9701) projected
  line L36 (37.7299, -3.9701) -> (37.9299, -3.9701)
  line L37 (4.1713, -3.9701) -> (4.1713, -0.3538) projected
  line L38 (4.1713, -3.9701) -> (3.9713, -3.9701)
  line L39 (-0.3124, 4.1299) -> (-3.9701, 4.1299) projected
  line L40 (-3.9701, 4.1299) -> (-3.9701, 3.9299)
  line L41 (4.1299, 45.8299) -> (3.9299, 45.8299)
  line L42 (-3.9701, 37.7299) -> (-3.9701, 37.9299)
  line L43 (42.1723, 37.7299) -> (45.8299, 37.7299) projected
  line L44 (45.8299, 37.7299) -> (45.8299, 37.9299)
  line L45 (37.7299, 45.8299) -> (37.7299, 42.1723) projected
  line L46 (37.7299, 45.8299) -> (37.9299, 45.8299)
  point P0 (0, 0)
  dimension "d78" = 0.2
extrude "Extrusion11" add sketch "Sketch14" against normal up to surface (5 mm away)
sketch "Skizze15" plane through (3.9701, 20.9299, 26.9) normal (1, 0, 0) x (0, 0, -1)
  arc A0 (11.9, -8.9666) -> (11.9, 8.9666) centre (0, 0) ccw projected
  circle A1 centre (0, 0) radius 16
  point P0 (26.9, -20.9299)
  dimension "d82" = 32
ref_plane "Arbeitsebene5" through (-45.8299, 7.911, 14) normal (0.7071068, -0.7071068, 0) x (0.7071068, 0.7071068, 0)
extrude "Extrusion12" cut sketch "Skizze15" against normal up to surface surface through (-45.8299, 7.911, 14) normal (0.7071068, -0.7071068, 0)
sketch "Skizze16" plane through (-20.9299, -3.9701, 26.9) normal (0, -1, 0) x (1, 0, 0)
  arc A0 (-8.9666, -11.9) -> (8.9666, -11.9) centre (0, 0) ccw projected
  line L0 (-8.9666, -11.9) -> (-17, -11.9) projected
  line L1 (-17, -16.9) -> (-17, -11.9) projected
  line L2 (16.9586, -16.9) -> (-17, -16.9) projected
  line L3 (16.9586, -16.9) -> (16.9586, -11.9) projected
  line L4 (8.9666, -11.9) -> (16.9586, -11.9) projected
  circle A1 centre (0, 0) radius 16
  point P0 (20.9299, -26.9)
  dimension "d85" = 32
ref_plane "Arbeitsebene6" through (-45.8299, 7.911, 14) normal (0.7071068, -0.7071068, 0) x (0.7071068, 0.7071068, 0)
extrude "Extrusion13" cut sketch "Skizze16" against normal up to surface contours L0 A1 L4 A0 | A0 L4 A1 L0 surface through (-45.8299, 7.911, 14) normal (0.7071068, -0.7071068, 0)
sketch "Sketch11" plane through (0, 0, 43) normal (0, 0, 1) x (1, 0, 0)
  line L0 (-7.911, 45.8299) -> (-19.2247, 45.8299) projected
  line L1 (-19.2247, 45.8299) -> (-45.8299, 19.2247) projected
  line L2 (-45.8299, 19.2247) -> (-45.8299, 7.911) projected
  line L3 (-45.8299, 7.911) -> (-7.911, 45.8299) projected
  line L4 (-45.8299, 37.7299) -> (-45.8299, 19.2247) projected
  line L5 (-42.1723, 37.7299) -> (-45.8299, 37.7299) projected
  line L6 (-37.7299, 42.1723) -> (-42.1723, 37.7299) projected
  line L7 (-37.7299, 45.8299) -> (-37.7299, 42.1723) projected
  line L8 (-29.3463, 45.8299) -> (-37.7299, 45.8299) projected
  line L9 (-29.3463, 45.8299) -> (-19.2247, 45.8299) projected
  line L10 (-4.1299, 45.8299) -> (-7.911, 45.8299) projected
  line L11 (-4.1299, 42.1723) -> (-4.1299, 45.8299) projected
  line L12 (0.3124, 37.7299) -> (-4.1299, 42.1723) projected
  line L13 (3.9701, 37.7299) -> (0.3124, 37.7299) projected
  line L14 (3.9701, 29.8965) -> (3.9701, 11.9633) projected
  line L15 (3.9701, 29.8965) -> (3.9701, 37.7299) projected
  line L16 (-11.9633, -3.9701) -> (-4.1713, -3.9701) projected
  line L17 (-4.1713, -3.9701) -> (-4.1713, -0.3538) projected
  line L18 (-4.1713, -0.3538) -> (0.3124, 4.1299) projected
  line L19 (0.3124, 4.1299) -> (3.9701, 4.1299) projected
  line L20 (3.9701, 4.1299) -> (3.9701, 11.9633) projected
  line L21 (-11.9633, -3.9701) -> (-29.8965, -3.9701) projected
  line L22 (-37.7299, -3.9701) -> (-29.8965, -3.9701) projected
  line L23 (-37.7299, -0.3538) -> (-37.7299, -3.9701) projected
  line L24 (-45.8299, 7.911) -> (-7.911, 45.8299) projected
  line L25 (-45.8299, 7.911) -> (-7.911, 45.8299)
  line L26 (-45.8299, 7.911) -> (-45.8299, 4.1299) projected
  line L27 (-45.8299, 4.1299) -> (-42.1723, 4.1299) projected
  line L28 (-37.6885, -0.3538) -> (-37.7299, -0.3538) projected
  line L29 (-42.1723, 4.1299) -> (-37.6885, -0.3538) projected
  point P0 (0, 0)
sketch "Sketch12" plane through (-45.8299, 19.2247, 10) normal (-0.7071068, 0.7071068, 0) x (-0.7071068, -0.7071068, 0)
  line L0 (-45.6254, 33) -> (-45.6254, 0) projected
  line L1 (8, 0) -> (8, 33) projected
  line L2 (-45.6254, 0) -> (8, 0)
  line L3 (8, 0) -> (8, 4)
  line L4 (8, 4) -> (-45.6254, 4)
  line L5 (-45.6254, 4) -> (-45.6254, 0)
  point P0 (-18.8127, -10)
  point P1 (45.6254, -4)
  point P2 (45.6254, -5)
  point P3 (-8, -5)
  point P4 (-8, -4)
  dimension "d73" = 4
properties part number "20_Cube_Insert_Kinematic_Mirrormount_45_base_part1"
